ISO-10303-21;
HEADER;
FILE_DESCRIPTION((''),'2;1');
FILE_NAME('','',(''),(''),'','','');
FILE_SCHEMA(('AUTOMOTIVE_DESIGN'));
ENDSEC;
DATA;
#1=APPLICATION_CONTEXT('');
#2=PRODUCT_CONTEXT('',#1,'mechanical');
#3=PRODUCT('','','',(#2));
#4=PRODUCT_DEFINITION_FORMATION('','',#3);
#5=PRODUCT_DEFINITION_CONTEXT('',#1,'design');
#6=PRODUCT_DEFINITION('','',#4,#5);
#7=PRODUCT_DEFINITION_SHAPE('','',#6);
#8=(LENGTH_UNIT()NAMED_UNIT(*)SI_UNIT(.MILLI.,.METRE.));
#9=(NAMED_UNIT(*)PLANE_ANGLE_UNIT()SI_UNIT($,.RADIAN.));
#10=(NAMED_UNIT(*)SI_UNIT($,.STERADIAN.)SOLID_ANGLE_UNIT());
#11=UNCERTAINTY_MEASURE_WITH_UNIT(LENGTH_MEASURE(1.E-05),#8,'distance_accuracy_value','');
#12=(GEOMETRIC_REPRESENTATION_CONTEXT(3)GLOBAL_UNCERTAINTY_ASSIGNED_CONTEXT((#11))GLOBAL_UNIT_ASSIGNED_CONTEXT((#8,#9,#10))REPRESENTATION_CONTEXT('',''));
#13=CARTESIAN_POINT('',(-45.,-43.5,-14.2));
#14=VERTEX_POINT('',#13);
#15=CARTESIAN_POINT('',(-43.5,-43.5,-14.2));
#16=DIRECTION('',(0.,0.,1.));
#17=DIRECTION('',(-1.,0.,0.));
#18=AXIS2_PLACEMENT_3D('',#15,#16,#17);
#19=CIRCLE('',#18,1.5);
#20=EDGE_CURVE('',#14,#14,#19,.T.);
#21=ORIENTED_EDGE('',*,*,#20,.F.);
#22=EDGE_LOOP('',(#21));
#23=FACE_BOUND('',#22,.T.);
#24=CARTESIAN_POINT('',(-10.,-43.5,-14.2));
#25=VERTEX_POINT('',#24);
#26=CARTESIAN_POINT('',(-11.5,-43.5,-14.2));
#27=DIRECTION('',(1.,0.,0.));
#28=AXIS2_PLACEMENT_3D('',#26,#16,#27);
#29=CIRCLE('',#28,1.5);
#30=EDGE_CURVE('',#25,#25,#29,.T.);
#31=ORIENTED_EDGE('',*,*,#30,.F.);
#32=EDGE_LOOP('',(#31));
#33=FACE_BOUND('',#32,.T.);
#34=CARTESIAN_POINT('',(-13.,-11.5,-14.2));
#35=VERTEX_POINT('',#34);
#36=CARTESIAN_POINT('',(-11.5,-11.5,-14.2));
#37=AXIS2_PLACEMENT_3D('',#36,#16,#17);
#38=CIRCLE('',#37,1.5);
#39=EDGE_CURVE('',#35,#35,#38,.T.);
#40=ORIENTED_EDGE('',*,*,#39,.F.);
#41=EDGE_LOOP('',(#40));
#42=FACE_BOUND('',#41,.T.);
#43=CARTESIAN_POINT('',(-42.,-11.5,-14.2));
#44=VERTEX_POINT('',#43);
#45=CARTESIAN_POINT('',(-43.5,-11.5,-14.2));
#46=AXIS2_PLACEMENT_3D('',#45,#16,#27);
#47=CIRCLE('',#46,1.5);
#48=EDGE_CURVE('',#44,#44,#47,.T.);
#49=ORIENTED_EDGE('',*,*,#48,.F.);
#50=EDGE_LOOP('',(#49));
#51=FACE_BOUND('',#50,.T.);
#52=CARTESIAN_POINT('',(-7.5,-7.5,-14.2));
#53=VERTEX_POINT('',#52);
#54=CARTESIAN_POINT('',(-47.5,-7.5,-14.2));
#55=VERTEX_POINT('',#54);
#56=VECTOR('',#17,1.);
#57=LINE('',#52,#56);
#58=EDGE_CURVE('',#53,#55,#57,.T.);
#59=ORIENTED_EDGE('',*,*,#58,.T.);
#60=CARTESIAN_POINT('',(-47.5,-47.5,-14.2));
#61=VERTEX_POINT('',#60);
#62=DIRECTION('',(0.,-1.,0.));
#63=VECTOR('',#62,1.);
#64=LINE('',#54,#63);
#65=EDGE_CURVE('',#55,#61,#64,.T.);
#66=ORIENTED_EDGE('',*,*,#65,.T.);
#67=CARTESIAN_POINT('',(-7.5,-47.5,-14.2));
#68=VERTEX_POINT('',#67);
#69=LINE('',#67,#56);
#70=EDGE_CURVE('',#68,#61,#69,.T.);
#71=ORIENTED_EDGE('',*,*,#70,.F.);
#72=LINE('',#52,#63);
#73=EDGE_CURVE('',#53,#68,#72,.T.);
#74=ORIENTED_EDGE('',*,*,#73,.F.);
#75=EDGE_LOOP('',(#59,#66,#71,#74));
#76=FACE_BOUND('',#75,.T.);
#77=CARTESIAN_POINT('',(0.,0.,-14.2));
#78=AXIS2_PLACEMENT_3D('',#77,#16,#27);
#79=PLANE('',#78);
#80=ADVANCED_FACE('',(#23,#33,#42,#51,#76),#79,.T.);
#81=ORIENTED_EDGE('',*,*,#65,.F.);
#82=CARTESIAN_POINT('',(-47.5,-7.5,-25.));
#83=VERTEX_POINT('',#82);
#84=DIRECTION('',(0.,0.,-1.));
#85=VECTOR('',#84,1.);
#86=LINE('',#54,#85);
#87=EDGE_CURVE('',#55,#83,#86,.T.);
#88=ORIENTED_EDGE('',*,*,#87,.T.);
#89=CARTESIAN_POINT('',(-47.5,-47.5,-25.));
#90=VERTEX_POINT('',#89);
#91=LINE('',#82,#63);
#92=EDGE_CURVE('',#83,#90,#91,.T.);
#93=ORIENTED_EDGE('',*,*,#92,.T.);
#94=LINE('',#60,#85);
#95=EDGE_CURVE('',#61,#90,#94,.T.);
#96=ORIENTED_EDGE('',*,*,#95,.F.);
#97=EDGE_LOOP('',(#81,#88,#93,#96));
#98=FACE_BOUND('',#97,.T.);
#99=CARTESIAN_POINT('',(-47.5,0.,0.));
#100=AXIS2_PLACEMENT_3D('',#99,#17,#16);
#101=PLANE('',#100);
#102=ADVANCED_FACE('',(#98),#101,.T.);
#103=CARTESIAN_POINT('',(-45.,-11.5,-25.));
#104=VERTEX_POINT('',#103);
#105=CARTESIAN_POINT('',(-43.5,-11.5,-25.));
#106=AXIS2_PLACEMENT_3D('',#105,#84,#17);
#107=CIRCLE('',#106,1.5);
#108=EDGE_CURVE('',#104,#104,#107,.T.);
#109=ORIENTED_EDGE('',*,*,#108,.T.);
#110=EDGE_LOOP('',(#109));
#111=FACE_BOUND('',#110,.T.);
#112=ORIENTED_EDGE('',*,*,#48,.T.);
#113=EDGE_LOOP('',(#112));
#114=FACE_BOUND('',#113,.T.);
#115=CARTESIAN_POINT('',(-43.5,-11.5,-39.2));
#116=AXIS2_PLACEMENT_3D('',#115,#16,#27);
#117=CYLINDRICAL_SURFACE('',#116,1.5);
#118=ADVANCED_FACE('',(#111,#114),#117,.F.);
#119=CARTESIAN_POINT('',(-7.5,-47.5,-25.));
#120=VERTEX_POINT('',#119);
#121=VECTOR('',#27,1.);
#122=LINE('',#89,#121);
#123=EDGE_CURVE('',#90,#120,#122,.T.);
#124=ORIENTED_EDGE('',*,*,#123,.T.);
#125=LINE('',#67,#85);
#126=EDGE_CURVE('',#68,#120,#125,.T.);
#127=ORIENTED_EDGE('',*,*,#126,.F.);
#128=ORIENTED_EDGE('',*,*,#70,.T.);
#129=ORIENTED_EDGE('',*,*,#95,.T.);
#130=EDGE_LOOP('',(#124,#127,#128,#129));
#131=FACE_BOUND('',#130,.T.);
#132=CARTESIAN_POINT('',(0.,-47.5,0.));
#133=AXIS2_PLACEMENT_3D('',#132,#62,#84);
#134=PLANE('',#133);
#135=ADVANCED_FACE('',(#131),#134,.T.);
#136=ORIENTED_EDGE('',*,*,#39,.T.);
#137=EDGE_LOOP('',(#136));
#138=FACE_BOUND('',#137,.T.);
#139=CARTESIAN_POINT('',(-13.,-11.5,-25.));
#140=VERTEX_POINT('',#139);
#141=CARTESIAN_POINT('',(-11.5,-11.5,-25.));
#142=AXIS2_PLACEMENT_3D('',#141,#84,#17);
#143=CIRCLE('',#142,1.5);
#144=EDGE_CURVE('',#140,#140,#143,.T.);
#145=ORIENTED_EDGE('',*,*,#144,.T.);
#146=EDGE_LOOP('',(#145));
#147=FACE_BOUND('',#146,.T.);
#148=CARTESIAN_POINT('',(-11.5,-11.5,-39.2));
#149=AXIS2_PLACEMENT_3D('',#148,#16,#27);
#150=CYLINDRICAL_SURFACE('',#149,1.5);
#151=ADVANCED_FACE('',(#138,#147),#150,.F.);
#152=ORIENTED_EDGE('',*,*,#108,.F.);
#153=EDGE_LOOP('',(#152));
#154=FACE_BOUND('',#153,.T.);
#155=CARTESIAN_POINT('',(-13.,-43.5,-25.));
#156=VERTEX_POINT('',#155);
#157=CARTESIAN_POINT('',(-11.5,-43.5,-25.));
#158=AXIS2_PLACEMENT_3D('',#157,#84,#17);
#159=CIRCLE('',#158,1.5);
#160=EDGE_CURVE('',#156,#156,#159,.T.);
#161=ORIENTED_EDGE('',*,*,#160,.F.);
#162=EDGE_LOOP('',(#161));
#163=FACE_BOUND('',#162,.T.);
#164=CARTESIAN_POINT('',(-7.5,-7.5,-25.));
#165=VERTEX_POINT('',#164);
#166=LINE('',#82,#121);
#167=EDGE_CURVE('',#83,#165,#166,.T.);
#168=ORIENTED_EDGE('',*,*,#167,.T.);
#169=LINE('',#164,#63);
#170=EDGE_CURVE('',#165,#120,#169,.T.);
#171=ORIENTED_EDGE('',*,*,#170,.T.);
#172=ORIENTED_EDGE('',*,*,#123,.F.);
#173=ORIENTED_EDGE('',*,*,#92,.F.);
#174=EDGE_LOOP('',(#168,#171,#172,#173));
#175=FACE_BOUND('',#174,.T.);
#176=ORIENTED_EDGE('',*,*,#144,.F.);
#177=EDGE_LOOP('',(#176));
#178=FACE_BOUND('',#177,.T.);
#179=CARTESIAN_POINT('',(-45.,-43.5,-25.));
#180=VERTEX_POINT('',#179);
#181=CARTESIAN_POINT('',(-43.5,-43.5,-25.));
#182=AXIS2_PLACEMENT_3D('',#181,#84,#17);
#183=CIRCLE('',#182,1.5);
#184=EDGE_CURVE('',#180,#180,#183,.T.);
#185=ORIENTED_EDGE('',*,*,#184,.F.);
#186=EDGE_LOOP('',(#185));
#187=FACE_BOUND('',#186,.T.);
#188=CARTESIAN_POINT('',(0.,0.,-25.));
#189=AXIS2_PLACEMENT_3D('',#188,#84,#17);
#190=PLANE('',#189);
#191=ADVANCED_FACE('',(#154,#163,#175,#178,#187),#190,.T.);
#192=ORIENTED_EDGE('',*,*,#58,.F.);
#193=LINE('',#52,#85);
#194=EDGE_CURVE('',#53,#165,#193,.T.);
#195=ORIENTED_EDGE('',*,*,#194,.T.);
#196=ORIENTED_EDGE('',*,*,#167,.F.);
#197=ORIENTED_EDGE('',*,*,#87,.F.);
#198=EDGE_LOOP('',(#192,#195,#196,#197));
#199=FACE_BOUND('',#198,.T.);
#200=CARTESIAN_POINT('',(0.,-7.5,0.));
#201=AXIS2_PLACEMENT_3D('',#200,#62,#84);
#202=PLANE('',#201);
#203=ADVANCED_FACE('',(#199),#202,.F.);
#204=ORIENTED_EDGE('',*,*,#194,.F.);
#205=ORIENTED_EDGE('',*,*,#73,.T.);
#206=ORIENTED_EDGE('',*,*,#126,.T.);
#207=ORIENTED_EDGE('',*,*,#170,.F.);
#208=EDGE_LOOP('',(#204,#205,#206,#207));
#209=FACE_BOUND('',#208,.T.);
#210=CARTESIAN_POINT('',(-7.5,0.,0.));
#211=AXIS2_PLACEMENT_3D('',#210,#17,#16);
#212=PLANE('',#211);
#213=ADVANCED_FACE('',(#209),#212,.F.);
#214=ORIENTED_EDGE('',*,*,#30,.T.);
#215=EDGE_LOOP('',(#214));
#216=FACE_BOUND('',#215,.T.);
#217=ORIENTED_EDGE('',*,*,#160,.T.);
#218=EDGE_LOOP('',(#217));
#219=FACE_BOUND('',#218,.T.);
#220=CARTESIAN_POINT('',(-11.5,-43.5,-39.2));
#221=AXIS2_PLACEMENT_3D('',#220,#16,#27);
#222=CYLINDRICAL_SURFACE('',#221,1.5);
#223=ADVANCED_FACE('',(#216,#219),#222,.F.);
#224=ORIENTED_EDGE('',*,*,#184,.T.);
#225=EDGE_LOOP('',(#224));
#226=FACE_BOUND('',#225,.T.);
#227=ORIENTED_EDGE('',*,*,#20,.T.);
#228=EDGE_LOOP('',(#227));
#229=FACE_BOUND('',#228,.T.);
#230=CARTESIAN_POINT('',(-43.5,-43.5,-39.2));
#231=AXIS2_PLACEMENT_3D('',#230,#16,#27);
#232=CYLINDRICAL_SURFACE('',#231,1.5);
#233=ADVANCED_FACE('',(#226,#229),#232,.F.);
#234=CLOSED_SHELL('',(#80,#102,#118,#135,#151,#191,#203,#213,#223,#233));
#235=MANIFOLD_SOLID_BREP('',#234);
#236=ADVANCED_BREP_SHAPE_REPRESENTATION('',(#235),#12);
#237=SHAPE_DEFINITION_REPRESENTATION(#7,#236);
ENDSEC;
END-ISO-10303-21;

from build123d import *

# Parameters (mm, degrees)
LOFT_START          = -25
LOFT_1_OUTLINE_W    = 40
LOFT_1_OUTLINE_H    = 40
LOFT_1_DEPTH        = 10.8
SKETCH_1_R          = 1.5
CUT_EXTRUDE_1_DEPTH = 25


# Read off the part's stored shape, not the designer's step: По сечениям1
with BuildPart() as part:
    # По сечениям1 outline → По сечениям1 (new body)
    with BuildSketch(Plane.XY.offset(LOFT_START)):
        with Locations((-27.5, -27.5)):
            Rectangle(LOFT_1_OUTLINE_W, LOFT_1_OUTLINE_H)
    extrude(amount=LOFT_1_DEPTH)

    # Эскиз1 → Вырез-Вытянуть1 (cut)
    with BuildSketch(Plane.XY.offset(-14.2)):
        with Locations((-43.5, -11.5)):
            Circle(SKETCH_1_R)
        with Locations(Location((-43.5, -43.5, 0), (0, 0, 180))):
            Circle(SKETCH_1_R)
        with Locations(Location((-11.5, -11.5, 0), (0, 0, 180))):
            Circle(SKETCH_1_R)
        with Locations((-11.5, -43.5)):
            Circle(SKETCH_1_R)
    extrude(amount=-CUT_EXTRUDE_1_DEPTH, mode=Mode.SUBTRACT)


solid = part.part
